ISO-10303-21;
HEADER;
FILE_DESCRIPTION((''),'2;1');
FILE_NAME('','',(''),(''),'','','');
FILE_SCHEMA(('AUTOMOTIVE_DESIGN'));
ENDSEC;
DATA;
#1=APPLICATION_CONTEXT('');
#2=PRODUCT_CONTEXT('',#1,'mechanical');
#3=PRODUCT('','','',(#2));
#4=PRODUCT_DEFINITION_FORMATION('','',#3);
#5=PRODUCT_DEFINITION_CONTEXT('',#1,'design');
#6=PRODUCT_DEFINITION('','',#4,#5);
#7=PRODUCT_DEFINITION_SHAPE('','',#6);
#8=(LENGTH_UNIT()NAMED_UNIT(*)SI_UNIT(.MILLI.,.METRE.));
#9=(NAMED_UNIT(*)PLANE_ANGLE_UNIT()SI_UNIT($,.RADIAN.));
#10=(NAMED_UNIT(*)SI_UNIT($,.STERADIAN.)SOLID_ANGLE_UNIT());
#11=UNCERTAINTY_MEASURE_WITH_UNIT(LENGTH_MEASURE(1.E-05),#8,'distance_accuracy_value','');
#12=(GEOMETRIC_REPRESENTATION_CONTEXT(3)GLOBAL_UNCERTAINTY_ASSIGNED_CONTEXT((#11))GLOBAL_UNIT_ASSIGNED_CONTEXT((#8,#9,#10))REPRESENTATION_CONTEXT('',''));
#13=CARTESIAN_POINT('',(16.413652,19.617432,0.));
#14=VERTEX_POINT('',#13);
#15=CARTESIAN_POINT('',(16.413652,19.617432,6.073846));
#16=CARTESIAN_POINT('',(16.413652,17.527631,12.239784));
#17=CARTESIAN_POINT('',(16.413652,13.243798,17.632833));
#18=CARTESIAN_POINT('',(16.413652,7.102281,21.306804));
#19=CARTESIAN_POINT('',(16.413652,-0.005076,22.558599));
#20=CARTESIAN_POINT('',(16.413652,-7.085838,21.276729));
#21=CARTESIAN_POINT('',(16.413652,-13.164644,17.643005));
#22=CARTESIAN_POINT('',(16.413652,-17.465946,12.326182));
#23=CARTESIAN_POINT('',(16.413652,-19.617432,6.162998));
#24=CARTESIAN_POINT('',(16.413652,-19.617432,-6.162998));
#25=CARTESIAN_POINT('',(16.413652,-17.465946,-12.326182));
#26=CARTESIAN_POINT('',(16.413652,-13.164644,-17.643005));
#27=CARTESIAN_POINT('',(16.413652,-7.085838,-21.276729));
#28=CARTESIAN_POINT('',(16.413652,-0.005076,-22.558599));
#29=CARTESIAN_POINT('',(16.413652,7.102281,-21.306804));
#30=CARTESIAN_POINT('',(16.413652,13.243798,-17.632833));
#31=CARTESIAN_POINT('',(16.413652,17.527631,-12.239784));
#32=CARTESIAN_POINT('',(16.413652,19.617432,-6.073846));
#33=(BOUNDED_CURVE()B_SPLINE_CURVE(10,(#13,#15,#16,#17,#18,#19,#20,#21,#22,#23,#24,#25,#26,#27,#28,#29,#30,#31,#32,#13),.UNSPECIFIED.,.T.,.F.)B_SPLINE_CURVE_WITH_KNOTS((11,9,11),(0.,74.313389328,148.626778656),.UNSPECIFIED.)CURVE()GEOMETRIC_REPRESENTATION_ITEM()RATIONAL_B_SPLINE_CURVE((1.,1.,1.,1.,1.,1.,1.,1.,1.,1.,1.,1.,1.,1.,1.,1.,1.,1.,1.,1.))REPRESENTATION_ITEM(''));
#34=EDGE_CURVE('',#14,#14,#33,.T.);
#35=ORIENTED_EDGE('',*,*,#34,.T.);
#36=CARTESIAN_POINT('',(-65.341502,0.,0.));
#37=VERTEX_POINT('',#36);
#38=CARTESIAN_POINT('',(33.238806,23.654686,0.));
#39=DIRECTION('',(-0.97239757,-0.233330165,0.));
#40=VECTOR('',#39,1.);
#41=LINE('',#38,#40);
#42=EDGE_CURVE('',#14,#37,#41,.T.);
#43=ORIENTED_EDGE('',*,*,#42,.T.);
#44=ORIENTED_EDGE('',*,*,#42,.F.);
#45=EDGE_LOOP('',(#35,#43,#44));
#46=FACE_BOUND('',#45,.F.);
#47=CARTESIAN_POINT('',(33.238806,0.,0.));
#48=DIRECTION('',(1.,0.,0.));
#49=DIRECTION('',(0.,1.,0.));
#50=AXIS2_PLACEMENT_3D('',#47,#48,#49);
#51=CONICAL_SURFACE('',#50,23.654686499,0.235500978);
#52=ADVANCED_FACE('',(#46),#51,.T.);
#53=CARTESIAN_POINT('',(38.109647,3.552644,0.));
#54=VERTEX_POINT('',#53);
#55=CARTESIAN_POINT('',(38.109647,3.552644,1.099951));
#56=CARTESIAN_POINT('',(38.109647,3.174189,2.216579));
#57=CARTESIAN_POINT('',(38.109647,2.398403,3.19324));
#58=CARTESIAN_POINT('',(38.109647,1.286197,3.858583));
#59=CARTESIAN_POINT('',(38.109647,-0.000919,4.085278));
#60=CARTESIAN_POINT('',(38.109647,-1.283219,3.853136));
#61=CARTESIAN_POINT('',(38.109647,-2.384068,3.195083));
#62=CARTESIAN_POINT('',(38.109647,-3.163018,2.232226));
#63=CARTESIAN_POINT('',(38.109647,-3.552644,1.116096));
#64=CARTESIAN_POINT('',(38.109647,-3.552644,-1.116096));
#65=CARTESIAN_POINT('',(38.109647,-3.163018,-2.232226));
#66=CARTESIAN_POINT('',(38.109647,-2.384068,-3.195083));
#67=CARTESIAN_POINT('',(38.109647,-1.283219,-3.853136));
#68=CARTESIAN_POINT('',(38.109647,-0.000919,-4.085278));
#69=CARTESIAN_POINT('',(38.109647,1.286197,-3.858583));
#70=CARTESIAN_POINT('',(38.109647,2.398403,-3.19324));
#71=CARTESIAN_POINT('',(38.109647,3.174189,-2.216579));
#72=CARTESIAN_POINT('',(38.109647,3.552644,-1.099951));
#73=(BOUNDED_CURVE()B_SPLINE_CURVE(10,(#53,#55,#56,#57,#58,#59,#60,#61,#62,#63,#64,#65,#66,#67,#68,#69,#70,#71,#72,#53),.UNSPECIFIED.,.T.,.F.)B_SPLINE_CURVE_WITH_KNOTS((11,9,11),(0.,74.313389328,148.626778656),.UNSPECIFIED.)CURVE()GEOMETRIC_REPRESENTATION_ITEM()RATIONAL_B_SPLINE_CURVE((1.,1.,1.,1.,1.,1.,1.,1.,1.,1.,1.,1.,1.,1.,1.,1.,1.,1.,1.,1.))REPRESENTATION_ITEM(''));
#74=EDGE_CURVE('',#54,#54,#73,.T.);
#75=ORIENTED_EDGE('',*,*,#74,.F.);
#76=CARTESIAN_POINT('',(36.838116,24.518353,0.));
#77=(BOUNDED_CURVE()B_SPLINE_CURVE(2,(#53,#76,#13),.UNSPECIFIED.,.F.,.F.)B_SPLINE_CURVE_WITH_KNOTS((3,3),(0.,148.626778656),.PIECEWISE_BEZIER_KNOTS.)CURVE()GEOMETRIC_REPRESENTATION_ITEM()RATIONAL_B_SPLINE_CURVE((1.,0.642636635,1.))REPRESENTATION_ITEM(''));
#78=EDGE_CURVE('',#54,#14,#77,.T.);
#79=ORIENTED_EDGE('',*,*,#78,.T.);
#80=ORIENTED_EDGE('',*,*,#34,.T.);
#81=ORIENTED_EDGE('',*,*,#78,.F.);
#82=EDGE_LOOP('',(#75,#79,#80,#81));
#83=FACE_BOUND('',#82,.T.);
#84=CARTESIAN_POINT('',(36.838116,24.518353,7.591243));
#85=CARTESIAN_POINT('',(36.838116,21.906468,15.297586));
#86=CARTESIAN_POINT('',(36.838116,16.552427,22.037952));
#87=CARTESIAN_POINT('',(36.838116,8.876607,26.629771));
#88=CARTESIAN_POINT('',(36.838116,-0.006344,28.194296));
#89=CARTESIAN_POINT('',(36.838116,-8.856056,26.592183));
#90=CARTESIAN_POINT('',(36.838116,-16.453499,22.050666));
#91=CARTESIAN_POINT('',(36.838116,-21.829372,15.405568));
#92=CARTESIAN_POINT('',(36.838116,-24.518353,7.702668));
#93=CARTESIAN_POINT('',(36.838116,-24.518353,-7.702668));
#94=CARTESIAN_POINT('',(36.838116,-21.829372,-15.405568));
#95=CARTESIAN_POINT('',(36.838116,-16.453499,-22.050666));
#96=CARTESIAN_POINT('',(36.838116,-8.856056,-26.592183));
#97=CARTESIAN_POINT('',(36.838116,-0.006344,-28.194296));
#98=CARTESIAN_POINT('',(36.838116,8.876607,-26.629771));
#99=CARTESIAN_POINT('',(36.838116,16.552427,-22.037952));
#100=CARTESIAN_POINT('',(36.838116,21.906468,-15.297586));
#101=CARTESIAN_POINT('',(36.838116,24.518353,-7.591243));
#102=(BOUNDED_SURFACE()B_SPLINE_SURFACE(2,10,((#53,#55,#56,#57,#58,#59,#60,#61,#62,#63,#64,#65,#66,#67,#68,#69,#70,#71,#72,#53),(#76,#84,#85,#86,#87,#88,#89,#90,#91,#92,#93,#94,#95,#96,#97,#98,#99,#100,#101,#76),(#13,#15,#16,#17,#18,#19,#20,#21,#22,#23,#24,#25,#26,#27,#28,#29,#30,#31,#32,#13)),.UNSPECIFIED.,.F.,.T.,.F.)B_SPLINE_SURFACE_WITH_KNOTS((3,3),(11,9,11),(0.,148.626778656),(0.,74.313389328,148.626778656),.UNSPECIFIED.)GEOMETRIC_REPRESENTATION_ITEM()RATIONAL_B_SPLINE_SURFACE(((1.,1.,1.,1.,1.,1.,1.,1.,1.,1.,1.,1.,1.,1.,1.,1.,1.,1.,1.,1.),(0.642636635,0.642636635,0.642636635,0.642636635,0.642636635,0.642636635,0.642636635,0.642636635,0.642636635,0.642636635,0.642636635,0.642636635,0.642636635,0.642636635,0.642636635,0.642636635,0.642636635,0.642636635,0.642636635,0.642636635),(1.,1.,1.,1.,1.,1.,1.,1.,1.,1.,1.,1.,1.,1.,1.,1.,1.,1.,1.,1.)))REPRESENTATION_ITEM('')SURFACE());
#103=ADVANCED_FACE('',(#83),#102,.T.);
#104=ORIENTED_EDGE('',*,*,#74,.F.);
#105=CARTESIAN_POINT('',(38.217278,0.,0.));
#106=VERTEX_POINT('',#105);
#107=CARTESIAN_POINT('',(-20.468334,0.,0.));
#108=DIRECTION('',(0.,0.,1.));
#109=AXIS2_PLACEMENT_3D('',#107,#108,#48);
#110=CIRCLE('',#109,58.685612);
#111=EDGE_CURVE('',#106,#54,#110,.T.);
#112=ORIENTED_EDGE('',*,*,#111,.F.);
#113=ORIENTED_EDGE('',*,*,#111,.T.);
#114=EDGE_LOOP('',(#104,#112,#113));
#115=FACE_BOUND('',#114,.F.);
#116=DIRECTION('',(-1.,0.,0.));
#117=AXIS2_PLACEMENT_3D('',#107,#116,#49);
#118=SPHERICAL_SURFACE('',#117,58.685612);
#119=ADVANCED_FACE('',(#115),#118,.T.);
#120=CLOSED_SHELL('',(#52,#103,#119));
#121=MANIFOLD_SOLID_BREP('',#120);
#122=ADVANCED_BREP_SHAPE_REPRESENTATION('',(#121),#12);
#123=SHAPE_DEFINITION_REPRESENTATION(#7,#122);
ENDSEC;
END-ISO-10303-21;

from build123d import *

# Parameters (mm, degrees)
F2_R = 17.6175907834


# Not quite as in the source:
# - a feature names something its author has since deleted; it is built from what else it names


with BuildPart() as f1:
    # F0 (on Top) → F1 (revolve)
    with BuildSketch(Plane.XY):
        with BuildLine():
            ThreePointArc((38.2172784488, 0), (36.9591747663, 12.0864529425), (33.2388062377, 23.654686499))
            Line((33.2388062377, 23.654686499), (-65.3415024281, 0))
            Line((-65.3415024281, 0), (38.2172784488, 0))
        make_face()
    revolve(axis=Axis((-7.6676234603, 0, 0), (1, 0, 0)))

    # F2
    f2_edges = [f1.edges().sort_by_distance(p)[0] for p in [
        (33.238806, -23.654686, 0),
    ]]
    fillet(f2_edges, radius=F2_R)


solid = f1.part
